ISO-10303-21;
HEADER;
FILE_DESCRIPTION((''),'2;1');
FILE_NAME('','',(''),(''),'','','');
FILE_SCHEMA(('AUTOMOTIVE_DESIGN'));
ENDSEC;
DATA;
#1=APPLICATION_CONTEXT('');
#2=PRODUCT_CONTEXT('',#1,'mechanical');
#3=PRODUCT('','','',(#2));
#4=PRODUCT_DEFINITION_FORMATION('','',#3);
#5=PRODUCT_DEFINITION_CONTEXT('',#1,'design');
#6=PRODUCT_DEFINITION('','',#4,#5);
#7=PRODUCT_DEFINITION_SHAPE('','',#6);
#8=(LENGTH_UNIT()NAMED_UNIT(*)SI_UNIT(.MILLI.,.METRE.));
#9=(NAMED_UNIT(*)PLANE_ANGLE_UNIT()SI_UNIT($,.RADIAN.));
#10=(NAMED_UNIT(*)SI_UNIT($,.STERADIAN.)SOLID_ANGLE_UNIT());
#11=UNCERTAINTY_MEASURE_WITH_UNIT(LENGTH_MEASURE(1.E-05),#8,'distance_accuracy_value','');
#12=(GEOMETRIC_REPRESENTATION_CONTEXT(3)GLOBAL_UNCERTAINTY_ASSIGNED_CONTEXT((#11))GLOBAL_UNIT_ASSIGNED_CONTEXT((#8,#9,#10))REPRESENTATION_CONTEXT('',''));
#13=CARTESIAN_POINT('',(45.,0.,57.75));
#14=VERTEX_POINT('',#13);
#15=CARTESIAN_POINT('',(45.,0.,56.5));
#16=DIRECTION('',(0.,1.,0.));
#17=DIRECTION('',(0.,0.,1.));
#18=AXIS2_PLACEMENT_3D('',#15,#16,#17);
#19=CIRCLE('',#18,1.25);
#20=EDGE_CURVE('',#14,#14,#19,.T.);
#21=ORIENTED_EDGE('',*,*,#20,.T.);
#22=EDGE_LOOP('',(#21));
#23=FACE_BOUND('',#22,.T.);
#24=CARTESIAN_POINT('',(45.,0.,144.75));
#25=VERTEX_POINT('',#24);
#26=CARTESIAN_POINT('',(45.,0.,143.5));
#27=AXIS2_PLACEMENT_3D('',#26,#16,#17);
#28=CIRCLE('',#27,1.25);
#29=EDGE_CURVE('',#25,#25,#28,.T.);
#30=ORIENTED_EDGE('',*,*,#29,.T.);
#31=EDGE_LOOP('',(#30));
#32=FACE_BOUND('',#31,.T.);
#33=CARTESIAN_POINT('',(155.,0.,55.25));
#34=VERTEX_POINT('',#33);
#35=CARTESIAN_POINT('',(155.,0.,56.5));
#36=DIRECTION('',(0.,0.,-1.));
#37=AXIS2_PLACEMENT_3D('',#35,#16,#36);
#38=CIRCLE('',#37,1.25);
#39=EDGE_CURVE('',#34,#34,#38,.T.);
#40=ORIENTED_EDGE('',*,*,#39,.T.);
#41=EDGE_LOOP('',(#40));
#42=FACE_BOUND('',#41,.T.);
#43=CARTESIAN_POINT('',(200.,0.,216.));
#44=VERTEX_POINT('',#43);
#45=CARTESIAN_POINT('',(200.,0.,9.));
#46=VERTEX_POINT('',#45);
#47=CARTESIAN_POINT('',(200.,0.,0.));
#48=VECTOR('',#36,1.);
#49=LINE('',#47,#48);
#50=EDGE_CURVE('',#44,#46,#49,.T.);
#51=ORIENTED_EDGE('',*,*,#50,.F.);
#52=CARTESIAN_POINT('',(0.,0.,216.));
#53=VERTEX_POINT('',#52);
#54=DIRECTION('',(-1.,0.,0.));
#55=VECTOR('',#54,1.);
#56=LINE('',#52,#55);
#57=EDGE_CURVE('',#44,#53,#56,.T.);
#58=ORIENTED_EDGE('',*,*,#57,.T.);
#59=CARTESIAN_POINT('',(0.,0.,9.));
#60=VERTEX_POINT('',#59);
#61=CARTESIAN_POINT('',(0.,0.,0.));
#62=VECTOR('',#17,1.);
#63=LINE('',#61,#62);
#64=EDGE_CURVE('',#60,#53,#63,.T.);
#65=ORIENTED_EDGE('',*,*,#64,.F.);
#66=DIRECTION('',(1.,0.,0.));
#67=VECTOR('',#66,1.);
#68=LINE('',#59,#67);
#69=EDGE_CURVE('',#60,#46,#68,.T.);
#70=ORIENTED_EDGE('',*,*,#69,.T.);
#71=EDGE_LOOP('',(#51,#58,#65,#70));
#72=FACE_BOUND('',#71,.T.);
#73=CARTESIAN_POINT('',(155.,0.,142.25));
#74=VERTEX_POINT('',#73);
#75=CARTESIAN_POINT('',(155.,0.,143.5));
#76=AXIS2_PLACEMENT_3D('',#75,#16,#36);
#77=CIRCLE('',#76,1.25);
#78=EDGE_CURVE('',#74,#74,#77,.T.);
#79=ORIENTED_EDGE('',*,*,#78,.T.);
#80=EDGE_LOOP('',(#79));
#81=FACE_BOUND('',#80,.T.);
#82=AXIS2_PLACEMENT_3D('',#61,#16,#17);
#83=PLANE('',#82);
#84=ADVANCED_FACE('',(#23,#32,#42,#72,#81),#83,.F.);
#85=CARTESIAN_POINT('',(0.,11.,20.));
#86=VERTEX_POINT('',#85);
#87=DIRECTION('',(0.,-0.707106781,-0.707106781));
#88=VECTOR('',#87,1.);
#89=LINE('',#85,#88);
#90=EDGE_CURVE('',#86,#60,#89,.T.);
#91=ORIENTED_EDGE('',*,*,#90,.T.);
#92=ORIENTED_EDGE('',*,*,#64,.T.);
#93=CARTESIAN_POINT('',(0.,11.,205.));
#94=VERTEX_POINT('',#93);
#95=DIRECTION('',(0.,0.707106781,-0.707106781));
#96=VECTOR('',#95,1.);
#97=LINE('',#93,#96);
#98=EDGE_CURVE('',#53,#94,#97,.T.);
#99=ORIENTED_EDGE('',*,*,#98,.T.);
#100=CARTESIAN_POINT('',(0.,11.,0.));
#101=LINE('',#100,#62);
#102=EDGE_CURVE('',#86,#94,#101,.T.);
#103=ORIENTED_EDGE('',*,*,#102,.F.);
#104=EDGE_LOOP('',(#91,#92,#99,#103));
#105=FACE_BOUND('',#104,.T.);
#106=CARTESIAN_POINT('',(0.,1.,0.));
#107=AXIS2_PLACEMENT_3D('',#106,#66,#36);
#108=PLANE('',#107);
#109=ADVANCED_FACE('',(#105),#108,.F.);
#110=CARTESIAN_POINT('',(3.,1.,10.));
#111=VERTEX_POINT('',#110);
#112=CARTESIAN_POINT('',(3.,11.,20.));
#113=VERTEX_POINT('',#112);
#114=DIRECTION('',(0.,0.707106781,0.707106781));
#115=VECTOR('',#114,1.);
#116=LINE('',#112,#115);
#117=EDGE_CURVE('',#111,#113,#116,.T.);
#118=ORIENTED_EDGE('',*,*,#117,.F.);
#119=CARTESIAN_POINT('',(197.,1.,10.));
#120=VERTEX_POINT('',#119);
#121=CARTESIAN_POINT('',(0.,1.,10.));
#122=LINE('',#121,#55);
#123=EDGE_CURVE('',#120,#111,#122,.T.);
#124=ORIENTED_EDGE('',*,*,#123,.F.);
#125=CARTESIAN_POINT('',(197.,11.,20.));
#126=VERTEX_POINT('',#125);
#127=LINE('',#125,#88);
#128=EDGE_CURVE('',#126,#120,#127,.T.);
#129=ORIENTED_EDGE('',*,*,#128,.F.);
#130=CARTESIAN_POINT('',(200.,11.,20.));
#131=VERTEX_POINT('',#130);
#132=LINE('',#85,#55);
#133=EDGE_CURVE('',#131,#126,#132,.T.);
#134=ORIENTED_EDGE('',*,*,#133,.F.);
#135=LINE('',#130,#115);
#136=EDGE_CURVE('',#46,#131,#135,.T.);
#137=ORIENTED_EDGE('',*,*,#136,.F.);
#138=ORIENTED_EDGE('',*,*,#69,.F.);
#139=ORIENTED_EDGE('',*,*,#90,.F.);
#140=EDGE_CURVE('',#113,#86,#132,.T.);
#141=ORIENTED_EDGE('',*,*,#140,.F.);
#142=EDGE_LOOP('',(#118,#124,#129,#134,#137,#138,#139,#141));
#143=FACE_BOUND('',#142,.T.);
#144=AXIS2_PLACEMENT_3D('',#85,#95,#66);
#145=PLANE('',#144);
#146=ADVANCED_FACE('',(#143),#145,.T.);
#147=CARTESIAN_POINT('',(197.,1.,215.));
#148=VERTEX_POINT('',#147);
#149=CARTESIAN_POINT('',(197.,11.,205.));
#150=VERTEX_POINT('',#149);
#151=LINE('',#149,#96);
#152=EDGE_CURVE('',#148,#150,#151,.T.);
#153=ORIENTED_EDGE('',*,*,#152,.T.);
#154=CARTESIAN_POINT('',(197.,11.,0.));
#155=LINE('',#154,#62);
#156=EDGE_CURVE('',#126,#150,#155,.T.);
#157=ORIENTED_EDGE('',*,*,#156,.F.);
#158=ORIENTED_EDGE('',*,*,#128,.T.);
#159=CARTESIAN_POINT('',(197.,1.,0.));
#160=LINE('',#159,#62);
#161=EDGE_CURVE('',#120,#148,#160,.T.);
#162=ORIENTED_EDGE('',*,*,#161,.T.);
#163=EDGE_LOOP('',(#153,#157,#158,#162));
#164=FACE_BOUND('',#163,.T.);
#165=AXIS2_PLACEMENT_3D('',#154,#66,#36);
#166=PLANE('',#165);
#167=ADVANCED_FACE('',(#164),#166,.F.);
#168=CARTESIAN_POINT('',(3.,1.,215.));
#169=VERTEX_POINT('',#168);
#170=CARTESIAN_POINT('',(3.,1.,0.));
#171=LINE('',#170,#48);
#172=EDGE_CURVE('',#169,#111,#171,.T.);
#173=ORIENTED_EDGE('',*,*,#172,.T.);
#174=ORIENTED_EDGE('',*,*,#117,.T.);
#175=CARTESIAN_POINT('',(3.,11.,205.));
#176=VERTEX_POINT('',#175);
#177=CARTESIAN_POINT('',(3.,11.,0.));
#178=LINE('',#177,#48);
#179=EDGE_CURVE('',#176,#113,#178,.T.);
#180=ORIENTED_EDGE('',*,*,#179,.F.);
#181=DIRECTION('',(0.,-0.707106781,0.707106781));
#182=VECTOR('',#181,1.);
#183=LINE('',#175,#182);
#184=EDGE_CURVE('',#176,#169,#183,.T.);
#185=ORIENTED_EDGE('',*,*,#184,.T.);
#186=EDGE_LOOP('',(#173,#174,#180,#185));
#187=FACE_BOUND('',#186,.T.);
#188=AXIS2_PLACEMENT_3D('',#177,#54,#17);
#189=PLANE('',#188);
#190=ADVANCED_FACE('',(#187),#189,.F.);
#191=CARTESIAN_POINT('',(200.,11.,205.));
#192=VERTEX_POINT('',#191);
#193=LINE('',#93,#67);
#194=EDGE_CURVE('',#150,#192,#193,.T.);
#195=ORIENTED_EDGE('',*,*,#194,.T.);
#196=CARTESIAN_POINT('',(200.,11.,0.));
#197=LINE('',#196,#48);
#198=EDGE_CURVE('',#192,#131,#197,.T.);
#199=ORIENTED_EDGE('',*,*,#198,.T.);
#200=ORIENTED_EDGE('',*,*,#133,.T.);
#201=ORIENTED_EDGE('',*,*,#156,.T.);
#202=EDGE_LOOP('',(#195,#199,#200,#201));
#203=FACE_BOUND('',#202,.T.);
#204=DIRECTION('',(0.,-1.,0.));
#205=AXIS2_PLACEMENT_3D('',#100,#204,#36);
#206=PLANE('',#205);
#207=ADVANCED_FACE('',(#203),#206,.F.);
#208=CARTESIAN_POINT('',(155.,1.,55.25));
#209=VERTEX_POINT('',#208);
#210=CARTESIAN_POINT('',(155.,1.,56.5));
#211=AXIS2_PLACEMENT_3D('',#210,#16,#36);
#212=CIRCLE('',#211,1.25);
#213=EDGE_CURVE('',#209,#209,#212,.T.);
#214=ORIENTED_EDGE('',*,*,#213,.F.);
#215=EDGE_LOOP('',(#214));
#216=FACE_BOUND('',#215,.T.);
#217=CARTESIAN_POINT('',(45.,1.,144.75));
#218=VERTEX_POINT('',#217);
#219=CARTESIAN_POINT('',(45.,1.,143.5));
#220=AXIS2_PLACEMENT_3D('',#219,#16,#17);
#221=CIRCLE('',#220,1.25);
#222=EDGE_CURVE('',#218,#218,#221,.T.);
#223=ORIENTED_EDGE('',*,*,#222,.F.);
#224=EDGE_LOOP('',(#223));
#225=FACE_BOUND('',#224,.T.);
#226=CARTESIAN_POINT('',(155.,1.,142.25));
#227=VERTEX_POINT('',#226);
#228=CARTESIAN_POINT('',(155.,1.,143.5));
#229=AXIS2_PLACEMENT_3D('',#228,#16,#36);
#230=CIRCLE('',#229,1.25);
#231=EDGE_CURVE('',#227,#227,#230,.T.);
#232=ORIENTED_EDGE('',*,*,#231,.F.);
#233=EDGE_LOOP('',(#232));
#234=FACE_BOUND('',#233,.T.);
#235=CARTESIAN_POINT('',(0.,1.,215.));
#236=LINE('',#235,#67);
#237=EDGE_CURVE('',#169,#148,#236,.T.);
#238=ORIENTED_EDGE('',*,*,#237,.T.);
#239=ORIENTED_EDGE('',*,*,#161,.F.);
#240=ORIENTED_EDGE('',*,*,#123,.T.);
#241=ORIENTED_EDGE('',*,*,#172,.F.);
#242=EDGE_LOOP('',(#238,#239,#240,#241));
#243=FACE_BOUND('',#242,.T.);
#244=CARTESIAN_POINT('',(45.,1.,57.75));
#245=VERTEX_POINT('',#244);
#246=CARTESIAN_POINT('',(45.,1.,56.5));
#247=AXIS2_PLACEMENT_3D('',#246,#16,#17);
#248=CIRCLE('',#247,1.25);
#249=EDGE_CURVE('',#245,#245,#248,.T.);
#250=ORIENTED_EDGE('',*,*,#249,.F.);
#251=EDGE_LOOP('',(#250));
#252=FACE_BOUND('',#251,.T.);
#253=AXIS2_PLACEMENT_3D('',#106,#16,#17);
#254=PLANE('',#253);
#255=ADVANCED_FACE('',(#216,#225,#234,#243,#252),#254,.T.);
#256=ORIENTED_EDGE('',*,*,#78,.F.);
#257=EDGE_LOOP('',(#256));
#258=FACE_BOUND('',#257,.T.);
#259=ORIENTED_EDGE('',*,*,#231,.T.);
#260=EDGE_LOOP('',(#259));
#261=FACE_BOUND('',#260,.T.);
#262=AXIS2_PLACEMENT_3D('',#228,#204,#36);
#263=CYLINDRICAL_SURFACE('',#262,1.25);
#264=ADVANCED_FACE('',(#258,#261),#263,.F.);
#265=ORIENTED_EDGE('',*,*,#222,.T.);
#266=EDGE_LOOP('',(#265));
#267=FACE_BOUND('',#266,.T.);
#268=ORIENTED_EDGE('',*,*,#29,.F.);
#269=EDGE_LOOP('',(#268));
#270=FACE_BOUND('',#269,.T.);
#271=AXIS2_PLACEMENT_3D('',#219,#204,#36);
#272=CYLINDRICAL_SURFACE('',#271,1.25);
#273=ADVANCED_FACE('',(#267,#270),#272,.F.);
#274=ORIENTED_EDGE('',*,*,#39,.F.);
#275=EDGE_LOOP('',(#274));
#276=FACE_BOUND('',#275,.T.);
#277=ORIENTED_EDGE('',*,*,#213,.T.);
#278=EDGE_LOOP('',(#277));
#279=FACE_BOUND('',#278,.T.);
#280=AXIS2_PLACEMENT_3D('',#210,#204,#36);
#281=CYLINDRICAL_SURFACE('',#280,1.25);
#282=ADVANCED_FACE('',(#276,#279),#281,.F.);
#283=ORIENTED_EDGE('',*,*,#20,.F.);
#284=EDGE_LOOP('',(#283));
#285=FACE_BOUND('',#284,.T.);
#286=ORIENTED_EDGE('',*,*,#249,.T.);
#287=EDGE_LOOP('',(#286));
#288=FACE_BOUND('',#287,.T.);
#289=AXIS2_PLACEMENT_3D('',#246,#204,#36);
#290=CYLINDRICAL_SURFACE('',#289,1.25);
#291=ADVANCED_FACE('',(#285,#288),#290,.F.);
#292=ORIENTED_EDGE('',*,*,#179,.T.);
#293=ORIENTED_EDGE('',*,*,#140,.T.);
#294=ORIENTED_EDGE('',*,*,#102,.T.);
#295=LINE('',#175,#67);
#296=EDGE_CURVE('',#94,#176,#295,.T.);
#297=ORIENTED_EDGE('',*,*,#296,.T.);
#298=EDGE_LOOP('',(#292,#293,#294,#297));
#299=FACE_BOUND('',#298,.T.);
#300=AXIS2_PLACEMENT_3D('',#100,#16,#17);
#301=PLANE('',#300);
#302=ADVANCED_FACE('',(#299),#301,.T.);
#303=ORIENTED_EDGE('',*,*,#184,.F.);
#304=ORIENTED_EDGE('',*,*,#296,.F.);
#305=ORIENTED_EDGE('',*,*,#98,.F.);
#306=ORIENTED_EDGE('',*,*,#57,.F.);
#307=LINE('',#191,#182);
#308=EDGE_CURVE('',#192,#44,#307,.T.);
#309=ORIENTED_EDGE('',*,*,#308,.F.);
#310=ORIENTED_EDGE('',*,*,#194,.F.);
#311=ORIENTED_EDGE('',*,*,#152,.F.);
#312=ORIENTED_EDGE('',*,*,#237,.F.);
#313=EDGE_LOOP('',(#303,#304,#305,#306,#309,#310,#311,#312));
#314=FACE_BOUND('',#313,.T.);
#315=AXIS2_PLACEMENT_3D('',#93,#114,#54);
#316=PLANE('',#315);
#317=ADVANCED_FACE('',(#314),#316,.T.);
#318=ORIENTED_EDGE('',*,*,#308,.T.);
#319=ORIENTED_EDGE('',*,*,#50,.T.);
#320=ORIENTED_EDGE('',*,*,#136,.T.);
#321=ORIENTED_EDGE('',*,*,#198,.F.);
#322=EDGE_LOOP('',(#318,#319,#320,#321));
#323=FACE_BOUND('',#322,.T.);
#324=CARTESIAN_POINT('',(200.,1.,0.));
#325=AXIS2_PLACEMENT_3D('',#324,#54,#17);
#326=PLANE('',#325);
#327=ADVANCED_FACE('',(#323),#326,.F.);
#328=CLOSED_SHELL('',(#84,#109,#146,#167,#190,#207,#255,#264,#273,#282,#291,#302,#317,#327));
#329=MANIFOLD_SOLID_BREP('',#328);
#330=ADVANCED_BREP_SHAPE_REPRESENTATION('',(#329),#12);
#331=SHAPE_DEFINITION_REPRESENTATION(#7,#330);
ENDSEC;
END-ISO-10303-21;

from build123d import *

# Parameters (mm, degrees)
SKETCH1_W           = 200
SKETCH1_H           = 225
SKETCH1_R           = 1.25
BOSS_EXTRUDE1_DEPTH = 1
SKETCH2_W           = 3
SKETCH2_H           = 225
BOSS_EXTRUDE2_DEPTH = 10


with BuildPart() as part:
    # Sketch1 → Boss-Extrude1 (new body)
    with BuildSketch(Plane(origin=(0, 0, 0), x_dir=(1, 0, 0), z_dir=(0, 1, 0))):
        with Locations((100, -112.5)):
            Rectangle(SKETCH1_W, SKETCH1_H)
        with Locations(Location((45, -56.5, 0), (0, 0, 270))):
            Circle(SKETCH1_R, mode=Mode.SUBTRACT)
        with Locations(Location((155, -56.5, 0), (0, 0, 90))):
            Circle(SKETCH1_R, mode=Mode.SUBTRACT)
        with Locations(Location((45, -143.5, 0), (0, 0, 270))):
            Circle(SKETCH1_R, mode=Mode.SUBTRACT)
        with Locations(Location((155, -143.5, 0), (0, 0, 90))):
            Circle(SKETCH1_R, mode=Mode.SUBTRACT)
    extrude(amount=BOSS_EXTRUDE1_DEPTH)

    # Sketch2 → Boss-Extrude2 (add)
    with BuildSketch(Plane(origin=(0, 1, 0), x_dir=(1, 0, 0), z_dir=(0, 1, 0))):
        with Locations((1.5, -112.5)):
            Rectangle(SKETCH2_W, SKETCH2_H)
        with Locations((198.5, -112.5)):
            Rectangle(SKETCH2_W, SKETCH2_H)
    extrude(amount=BOSS_EXTRUDE2_DEPTH)

    # Chamfer7
    # the kernel refuses this chamfer: 20 mm, written as the material it takes off along each edge
    with BuildSketch(Plane(origin=(-123.440783422, 11, 0), x_dir=(0, -0.9996219169112968, -0.027495876610586372), z_dir=(1, 0, 0))) as chamfer7_piece_1:
        with BuildLine():
            Line((20.573463904, 0), (-1.130943098, -20.54235587))
            Line((-1.130943098, -20.54235587), (-1.530791864, -20.53135752))
            ThreePointArc((-1.530791864, -20.53135752), (-0.682584541, -10.267956593), (-0.399848767, 0.010998351))
            Line((-0.399848767, 0.010998351), (0.010998351, 0.399848767))
            ThreePointArc((0.010998351, 0.399848767), (10.289953294, 0.117112992), (20.584462254, 0.399848767))
            Line((20.584462254, 0.399848767), (20.573463904, 0))
        make_face()
    extrude(amount=249.881566845, mode=Mode.SUBTRACT)
    with BuildSketch(Plane(origin=(323.440783422, 11, 0), x_dir=(0, -0.9996219169112968, -0.027495876610586372), z_dir=(-1, 0, 0))) as chamfer7_piece_2:
        with BuildLine():
            Line((20.573463904, 0), (-1.130943098, 20.54235587))
            Line((-1.130943098, 20.54235587), (-1.530791864, 20.53135752))
            ThreePointArc((-1.530791864, 20.53135752), (-0.682584541, 10.267956593), (-0.399848767, -0.010998351))
            Line((-0.399848767, -0.010998351), (0.010998351, -0.399848767))
            ThreePointArc((0.010998351, -0.399848767), (10.289953294, -0.117112992), (20.584462254, -0.399848767))
            Line((20.584462254, -0.399848767), (20.573463904, 0))
        make_face()
    extrude(amount=249.881566845, mode=Mode.SUBTRACT)

    # Chamfer8
    # the kernel refuses this chamfer: 20 mm, written as the material it takes off along each edge
    with BuildSketch(Plane(origin=(126.440783422, 11, 225), x_dir=(0, 0.027495876610586403, -0.9996219169112968), z_dir=(-1, 0, 0))) as chamfer8_piece_1:
        with BuildLine():
            Line((20.573463904, 0), (-1.130943098, 20.54235587))
            Line((-1.130943098, 20.54235587), (-1.530791864, 20.53135752))
            ThreePointArc((-1.530791864, 20.53135752), (-0.682584541, 10.267956593), (-0.399848767, -0.010998351))
            Line((-0.399848767, -0.010998351), (0.010998351, -0.399848767))
            ThreePointArc((0.010998351, -0.399848767), (10.289953294, -0.117112992), (20.584462254, -0.399848767))
            Line((20.584462254, -0.399848767), (20.573463904, 0))
        make_face()
    extrude(amount=249.881566845, mode=Mode.SUBTRACT)
    with BuildSketch(Plane(origin=(73.559216578, 11, 225), x_dir=(0, 0.027495876610586403, -0.9996219169112968), z_dir=(1, 0, 0))) as chamfer8_piece_2:
        with BuildLine():
            Line((20.573463904, 0), (-1.130943098, -20.54235587))
            Line((-1.130943098, -20.54235587), (-1.530791864, -20.53135752))
            ThreePointArc((-1.530791864, -20.53135752), (-0.682584541, -10.267956593), (-0.399848767, 0.010998351))
            Line((-0.399848767, 0.010998351), (0.010998351, 0.399848767))
            ThreePointArc((0.010998351, 0.399848767), (10.289953294, 0.117112992), (20.584462254, 0.399848767))
            Line((20.584462254, 0.399848767), (20.573463904, 0))
        make_face()
    extrude(amount=249.881566845, mode=Mode.SUBTRACT)


solid = part.part
